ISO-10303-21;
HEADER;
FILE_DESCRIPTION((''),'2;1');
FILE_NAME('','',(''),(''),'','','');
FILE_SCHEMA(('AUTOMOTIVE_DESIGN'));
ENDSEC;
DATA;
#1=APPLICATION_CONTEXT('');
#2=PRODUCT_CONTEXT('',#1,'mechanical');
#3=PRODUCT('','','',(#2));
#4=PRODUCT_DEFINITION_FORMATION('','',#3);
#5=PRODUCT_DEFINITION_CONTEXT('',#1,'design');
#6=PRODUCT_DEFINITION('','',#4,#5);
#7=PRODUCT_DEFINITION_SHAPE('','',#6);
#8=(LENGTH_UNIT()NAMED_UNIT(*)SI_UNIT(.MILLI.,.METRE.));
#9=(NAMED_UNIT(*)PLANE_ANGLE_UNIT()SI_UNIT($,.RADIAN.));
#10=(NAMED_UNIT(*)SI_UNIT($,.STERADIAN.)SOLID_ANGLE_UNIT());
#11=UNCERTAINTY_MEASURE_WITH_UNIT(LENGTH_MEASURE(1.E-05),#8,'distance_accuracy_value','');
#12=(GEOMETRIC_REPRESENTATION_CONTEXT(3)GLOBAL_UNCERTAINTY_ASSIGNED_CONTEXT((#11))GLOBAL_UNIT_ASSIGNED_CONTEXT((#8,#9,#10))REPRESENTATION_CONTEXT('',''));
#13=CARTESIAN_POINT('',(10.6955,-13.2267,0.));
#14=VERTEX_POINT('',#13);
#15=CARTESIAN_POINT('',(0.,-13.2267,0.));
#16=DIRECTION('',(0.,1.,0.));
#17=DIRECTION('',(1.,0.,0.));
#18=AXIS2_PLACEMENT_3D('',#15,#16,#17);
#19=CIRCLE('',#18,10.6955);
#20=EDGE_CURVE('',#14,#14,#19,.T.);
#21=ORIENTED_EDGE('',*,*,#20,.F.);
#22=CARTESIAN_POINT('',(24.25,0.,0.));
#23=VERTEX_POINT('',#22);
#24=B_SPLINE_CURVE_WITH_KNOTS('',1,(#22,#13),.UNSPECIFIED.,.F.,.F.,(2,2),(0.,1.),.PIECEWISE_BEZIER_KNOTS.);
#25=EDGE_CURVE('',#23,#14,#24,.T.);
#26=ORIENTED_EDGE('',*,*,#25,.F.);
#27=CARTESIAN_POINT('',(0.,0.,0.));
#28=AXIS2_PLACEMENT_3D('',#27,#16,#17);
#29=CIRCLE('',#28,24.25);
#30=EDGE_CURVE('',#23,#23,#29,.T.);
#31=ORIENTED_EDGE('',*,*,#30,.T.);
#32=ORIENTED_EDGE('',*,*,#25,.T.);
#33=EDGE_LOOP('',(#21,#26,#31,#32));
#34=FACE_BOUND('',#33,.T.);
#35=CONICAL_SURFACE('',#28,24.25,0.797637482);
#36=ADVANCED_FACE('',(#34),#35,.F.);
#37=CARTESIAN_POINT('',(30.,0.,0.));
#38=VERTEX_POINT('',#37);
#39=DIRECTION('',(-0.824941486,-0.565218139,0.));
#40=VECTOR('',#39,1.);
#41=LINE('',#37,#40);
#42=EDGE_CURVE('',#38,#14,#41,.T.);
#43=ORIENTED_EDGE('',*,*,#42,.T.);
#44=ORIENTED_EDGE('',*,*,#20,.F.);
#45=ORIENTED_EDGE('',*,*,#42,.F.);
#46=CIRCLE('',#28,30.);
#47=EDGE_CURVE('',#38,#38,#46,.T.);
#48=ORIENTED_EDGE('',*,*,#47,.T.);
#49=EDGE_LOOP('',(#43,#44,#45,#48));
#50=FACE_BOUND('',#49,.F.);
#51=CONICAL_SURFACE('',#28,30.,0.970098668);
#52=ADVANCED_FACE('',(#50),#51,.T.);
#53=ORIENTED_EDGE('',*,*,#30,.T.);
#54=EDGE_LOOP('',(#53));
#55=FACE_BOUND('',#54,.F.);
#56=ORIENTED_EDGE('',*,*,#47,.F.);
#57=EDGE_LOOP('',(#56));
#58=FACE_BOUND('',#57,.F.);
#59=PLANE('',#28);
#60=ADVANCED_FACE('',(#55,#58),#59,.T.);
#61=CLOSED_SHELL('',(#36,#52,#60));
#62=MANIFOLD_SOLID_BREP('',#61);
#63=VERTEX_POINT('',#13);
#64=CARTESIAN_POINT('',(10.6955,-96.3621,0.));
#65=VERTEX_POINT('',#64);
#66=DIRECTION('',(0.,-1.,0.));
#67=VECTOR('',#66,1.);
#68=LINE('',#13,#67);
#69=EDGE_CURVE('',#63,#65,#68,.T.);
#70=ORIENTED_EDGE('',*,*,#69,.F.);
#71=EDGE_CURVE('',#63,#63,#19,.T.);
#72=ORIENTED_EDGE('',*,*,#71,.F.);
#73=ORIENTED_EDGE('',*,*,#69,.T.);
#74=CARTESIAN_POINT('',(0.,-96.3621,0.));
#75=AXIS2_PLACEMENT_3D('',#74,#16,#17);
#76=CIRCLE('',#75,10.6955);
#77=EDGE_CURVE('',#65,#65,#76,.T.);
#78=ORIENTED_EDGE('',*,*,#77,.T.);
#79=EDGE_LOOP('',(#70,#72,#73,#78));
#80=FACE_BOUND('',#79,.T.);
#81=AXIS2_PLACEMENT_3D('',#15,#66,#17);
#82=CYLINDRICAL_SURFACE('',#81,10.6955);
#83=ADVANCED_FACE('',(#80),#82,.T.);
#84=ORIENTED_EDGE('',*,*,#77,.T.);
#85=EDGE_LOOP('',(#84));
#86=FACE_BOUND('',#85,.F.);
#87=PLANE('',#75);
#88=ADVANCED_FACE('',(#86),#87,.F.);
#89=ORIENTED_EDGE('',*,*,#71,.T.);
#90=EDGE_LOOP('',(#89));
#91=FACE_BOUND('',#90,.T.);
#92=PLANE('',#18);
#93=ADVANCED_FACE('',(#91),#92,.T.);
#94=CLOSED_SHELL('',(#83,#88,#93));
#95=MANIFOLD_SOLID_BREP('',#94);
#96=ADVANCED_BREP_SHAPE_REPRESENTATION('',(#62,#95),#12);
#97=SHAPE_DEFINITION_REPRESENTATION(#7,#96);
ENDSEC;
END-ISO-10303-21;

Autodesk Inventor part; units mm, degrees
ref_plane "YZ Plane" through (0, 0, 0) normal (1, 0, 0) x (0, 1, 0)
ref_plane "XZ Plane" through (0, 0, 0) normal (0, 1, 0) x (-1, 0, 0)
ref_plane "XY Plane" through (0, 0, 0) normal (0, 0, 1) x (1, 0, 0)
sketch "Sketch1" plane through (0, 0, 0) normal (0, 0, 1) x (1, 0, 0)
  line L0 (0, 0) -> (30, 0)
  line L1 (0, -96.3621) -> (0, 0)
  line L2 (30, 0) -> (10.6955, -13.2267)
  line L3 (10.6955, -13.2267) -> (10.6955, -96.3621)
  line L4 (10.6955, -96.3621) -> (0, -96.3621)
  dimension "d0" = 30
revolve "Revolution1" add sketch "Sketch1" angle 360 about axis through (0, -96.3621, 0) along (0, 1, 0)
sketch "Sketch3" plane through (0, 0, 0) normal (0, 1, 0) x (1, 0, 0)
  circle A0 centre (0, 0) radius 24.25
  dimension "d8" = 48.5
loft "Loft2" cut profiles "Sketch3" section 2 edges at (-10.6955, -13.2267, 0)
